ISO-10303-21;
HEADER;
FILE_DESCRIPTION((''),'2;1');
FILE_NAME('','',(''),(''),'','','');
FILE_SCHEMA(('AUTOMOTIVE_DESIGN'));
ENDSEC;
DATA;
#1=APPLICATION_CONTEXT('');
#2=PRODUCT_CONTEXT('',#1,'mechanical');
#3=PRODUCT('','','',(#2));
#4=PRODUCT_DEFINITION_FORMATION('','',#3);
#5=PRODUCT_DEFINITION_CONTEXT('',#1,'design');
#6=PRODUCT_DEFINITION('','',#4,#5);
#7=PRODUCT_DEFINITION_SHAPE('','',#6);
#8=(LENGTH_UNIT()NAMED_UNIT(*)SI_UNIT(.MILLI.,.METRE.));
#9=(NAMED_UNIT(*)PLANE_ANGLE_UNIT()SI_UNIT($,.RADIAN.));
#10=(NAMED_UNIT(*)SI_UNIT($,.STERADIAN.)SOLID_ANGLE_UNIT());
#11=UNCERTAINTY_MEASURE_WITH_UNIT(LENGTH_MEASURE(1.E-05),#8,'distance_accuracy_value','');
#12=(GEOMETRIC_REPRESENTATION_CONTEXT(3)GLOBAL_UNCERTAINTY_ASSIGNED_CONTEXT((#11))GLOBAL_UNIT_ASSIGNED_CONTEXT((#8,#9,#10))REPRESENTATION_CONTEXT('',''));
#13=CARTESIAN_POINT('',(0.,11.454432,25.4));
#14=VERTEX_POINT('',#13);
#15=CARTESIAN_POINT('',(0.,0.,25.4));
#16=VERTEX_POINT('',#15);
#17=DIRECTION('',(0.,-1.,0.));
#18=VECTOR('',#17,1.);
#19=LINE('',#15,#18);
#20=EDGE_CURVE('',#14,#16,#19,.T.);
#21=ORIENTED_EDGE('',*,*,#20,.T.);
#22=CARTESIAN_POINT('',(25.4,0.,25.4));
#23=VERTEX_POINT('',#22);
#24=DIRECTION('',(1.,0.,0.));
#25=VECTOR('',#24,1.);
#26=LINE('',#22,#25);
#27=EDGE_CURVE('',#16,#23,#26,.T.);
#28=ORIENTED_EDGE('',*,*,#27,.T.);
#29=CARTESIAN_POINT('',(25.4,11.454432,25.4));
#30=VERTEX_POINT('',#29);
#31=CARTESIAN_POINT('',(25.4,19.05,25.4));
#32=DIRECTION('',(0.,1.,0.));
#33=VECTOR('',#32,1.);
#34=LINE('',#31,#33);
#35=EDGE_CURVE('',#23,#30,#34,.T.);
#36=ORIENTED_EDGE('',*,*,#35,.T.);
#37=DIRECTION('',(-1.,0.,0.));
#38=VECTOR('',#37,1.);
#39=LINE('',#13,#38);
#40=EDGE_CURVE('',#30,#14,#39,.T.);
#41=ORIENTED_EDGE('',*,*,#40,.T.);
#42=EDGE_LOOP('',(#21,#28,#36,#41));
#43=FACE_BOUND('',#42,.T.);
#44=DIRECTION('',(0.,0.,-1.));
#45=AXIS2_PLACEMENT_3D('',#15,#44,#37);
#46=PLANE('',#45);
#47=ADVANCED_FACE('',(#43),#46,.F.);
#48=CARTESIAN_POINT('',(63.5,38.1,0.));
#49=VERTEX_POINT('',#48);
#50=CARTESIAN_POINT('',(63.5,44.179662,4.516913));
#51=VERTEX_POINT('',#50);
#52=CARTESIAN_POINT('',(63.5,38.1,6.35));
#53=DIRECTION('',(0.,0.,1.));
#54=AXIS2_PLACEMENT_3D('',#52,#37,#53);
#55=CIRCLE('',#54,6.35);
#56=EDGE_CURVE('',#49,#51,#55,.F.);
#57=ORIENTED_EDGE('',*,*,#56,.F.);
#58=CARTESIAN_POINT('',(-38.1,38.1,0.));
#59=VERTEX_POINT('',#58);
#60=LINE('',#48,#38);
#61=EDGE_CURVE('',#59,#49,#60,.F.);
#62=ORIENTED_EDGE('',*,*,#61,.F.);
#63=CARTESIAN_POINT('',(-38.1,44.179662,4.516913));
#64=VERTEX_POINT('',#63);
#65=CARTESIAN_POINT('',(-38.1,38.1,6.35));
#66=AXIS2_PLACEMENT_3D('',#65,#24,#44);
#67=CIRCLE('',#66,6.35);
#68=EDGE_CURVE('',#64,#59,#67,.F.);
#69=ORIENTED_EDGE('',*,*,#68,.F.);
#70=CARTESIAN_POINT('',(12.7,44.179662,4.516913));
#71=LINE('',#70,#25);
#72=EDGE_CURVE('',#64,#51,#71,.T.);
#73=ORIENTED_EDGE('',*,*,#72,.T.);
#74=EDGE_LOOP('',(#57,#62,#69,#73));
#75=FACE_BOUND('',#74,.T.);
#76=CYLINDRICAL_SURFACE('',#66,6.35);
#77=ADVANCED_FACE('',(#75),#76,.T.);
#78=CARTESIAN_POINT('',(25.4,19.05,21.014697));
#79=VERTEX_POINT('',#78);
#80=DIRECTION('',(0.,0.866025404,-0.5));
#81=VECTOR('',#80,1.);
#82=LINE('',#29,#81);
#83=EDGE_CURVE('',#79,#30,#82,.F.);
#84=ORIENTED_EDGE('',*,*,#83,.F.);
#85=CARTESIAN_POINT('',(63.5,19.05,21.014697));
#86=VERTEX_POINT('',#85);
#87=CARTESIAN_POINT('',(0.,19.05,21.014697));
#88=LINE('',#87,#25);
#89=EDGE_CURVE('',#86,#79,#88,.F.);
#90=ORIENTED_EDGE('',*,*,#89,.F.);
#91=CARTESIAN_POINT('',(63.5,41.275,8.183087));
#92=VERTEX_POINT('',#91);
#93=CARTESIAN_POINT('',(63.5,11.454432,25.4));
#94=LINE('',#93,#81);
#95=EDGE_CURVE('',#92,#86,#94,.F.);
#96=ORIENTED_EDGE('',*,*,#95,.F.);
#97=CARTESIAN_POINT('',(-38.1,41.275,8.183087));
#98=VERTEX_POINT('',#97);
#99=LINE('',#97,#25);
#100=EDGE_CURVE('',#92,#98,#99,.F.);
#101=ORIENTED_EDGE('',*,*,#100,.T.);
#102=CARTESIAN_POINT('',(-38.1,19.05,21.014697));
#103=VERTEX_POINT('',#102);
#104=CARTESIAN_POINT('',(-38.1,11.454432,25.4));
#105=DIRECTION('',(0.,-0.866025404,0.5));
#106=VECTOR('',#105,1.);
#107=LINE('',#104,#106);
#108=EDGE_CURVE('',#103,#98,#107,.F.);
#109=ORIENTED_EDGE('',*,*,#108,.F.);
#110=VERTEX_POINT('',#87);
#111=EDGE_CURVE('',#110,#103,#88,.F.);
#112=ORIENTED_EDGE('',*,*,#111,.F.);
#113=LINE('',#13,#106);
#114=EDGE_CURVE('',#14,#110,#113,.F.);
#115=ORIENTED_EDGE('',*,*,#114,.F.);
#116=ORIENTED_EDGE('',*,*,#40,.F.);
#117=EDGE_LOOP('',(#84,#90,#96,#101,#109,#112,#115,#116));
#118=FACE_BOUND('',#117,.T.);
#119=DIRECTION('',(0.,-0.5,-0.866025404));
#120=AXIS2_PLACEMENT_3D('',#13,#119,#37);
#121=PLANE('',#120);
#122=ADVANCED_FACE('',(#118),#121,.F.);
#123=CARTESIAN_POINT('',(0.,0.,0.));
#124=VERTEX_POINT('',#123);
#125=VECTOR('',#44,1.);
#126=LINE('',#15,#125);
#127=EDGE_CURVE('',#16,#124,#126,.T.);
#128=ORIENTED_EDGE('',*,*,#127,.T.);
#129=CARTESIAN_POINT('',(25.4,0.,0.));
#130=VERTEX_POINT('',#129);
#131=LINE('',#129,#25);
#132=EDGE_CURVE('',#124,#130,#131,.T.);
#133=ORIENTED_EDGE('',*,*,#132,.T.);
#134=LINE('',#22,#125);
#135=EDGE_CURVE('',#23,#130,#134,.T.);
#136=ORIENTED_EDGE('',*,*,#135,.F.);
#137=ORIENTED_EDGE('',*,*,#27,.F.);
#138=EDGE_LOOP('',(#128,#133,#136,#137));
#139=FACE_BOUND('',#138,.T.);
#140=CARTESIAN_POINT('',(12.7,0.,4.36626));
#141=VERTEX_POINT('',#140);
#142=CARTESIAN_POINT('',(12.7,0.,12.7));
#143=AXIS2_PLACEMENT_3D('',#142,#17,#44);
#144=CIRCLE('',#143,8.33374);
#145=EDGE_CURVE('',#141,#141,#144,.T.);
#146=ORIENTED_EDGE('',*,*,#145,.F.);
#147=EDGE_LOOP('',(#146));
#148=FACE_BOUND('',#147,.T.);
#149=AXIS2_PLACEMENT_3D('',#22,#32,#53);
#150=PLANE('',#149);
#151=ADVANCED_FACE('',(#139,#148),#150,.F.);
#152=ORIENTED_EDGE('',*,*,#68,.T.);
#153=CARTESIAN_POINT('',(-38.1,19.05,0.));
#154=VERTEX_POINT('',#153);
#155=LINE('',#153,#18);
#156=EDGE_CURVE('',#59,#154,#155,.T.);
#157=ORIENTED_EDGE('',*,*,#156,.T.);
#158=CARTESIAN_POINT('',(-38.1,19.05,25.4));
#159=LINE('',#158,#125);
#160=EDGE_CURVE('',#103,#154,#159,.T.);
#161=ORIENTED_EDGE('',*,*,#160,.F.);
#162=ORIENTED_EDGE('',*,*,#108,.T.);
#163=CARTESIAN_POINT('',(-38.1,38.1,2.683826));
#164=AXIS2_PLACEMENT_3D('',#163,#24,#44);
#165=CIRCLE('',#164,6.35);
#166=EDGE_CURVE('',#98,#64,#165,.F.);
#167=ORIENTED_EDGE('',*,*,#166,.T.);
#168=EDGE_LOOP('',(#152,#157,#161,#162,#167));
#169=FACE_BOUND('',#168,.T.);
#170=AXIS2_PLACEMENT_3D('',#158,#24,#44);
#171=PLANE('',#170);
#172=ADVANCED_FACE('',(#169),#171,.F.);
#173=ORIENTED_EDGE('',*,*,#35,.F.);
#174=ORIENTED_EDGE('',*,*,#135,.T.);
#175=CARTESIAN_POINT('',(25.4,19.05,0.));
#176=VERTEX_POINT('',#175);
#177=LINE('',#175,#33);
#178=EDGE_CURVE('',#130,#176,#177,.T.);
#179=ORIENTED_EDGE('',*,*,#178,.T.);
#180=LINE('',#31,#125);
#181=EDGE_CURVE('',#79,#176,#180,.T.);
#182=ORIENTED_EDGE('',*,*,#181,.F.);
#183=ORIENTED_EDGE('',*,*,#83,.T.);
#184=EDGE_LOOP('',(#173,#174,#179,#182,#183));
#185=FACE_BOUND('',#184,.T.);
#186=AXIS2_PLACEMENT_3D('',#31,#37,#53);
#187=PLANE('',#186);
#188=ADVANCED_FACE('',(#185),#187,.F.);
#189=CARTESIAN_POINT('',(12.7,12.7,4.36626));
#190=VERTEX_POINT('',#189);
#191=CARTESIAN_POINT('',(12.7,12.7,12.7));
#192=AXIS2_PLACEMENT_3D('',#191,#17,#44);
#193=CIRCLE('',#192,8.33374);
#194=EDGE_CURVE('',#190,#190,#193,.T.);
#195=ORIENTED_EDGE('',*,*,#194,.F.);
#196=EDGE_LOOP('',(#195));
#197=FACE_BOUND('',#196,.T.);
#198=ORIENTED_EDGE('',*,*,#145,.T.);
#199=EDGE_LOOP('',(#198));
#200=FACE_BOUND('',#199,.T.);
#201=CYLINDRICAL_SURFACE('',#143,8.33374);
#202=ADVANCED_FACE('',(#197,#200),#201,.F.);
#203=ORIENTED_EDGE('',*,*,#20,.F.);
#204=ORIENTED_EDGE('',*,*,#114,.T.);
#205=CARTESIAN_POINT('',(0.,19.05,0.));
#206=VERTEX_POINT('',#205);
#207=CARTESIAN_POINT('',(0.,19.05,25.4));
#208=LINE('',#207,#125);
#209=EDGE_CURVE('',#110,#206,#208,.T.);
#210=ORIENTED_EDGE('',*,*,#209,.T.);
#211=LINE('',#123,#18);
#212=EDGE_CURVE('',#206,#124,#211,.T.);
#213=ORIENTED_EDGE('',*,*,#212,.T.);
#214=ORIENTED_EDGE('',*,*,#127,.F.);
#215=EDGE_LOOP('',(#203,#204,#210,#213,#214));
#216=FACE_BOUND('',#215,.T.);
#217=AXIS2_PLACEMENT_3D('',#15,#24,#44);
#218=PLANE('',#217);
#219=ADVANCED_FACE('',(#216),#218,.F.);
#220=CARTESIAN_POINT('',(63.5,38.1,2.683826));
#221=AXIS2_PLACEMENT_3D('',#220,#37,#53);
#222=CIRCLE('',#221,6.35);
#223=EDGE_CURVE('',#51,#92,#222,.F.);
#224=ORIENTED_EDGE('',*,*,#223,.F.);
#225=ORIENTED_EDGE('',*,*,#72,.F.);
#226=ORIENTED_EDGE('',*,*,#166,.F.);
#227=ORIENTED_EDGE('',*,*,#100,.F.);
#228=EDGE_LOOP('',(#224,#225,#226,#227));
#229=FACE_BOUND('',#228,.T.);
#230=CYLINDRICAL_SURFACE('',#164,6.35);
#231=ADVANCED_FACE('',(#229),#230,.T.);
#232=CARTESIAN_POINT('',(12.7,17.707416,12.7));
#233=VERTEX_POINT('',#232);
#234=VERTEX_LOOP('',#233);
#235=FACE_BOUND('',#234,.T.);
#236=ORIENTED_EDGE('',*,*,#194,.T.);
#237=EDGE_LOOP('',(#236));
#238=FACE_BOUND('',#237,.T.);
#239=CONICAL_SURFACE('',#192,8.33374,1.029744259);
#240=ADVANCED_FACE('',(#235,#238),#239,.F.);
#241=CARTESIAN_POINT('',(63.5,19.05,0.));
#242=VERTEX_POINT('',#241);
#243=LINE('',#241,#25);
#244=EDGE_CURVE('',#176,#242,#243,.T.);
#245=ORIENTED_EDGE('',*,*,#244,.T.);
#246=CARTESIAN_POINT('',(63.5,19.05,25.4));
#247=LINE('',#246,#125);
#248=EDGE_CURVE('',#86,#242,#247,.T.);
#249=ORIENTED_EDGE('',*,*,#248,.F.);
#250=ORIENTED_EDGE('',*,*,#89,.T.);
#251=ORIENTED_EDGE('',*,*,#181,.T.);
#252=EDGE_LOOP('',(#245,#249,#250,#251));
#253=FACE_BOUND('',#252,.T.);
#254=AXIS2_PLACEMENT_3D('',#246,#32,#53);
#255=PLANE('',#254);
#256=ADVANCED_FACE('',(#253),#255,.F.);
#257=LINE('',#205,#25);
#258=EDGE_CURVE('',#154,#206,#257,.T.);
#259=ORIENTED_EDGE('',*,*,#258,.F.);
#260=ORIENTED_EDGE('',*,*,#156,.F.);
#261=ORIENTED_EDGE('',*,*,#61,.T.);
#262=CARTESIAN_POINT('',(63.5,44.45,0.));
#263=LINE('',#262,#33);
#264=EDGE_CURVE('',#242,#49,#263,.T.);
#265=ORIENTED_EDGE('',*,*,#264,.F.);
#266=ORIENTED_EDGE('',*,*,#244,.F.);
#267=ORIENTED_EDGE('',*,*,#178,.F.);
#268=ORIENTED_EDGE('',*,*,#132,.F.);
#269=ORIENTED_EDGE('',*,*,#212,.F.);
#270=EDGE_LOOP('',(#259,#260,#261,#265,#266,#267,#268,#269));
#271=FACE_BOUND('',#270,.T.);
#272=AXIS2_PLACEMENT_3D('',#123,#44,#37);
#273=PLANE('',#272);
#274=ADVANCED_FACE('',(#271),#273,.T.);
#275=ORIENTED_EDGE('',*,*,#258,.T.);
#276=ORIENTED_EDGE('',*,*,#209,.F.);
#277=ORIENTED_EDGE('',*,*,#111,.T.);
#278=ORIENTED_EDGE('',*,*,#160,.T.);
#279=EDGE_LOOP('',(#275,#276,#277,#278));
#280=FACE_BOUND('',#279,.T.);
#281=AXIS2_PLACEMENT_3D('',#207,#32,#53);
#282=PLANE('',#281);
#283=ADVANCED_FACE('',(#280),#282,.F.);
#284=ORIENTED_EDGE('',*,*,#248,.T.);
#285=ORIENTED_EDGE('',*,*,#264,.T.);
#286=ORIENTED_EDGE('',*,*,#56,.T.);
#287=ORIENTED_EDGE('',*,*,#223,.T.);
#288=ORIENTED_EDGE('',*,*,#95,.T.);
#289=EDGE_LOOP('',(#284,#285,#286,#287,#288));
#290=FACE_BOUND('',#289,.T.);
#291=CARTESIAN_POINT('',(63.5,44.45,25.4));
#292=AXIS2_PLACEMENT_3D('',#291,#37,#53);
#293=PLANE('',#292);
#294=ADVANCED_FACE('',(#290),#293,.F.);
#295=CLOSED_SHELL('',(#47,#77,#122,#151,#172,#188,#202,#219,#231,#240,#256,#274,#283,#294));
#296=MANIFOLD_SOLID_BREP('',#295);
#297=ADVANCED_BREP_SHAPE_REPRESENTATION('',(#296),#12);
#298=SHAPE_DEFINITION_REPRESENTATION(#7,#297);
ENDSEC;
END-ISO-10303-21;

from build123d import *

# Parameters (mm, degrees)
BOSS_EXTRUDE1_DEPTH = 25.4
CHAMFER1_SIZE       = 19.05
CHAMFER1_SIZE2      = 32.995567884
FILLET1_R           = 6.35


# Read off the part's stored shape, not the designer's step: AdvancedHole1
with BuildPart() as part:
    # Sketch1 → Boss-Extrude1 (new body)
    with BuildSketch(Plane.XY):
        Polygon((0, 0), (0, 19.05), (-38.1, 19.05), (-38.1, 44.45), (63.5, 44.45), (63.5, 19.05), (25.4, 19.05), (25.4, 0), align=None)
    extrude(amount=BOSS_EXTRUDE1_DEPTH)

    # Chamfer1
    chamfer1_edges = [part.edges().sort_by_distance(p)[0] for p in [
        (12.7, 44.45, 25.4),
    ]]
    chamfer1_side = [part.faces().sort_by_distance(p)[0] for p in [
        (12.7, 44.45, 12.7),
    ]]
    chamfer(chamfer1_edges, length=CHAMFER1_SIZE, length2=CHAMFER1_SIZE2, reference=chamfer1_side[0])

    # Fillet1
    # the kernel refuses this fillet: 6.35 mm, written as the material it takes off along each edge
    with BuildSketch(Plane(origin=(-53.975, 44.45, 0), x_dir=(0, -1, 0), z_dir=(1, 0, 0))) as fillet1_piece_1:
        with BuildLine():
            CenterArc((FILLET1_R, -FILLET1_R), FILLET1_R, 90, 90)
            Line((0, -FILLET1_R), (0, 0))
            Line((0, 0), (FILLET1_R, 0))
        make_face()
    extrude(amount=133.35, mode=Mode.SUBTRACT)
    with BuildSketch(Plane(origin=(-47.265435523, 44.45, 6.35), x_dir=(0, -0.8660254037844407, 0.49999999999999656), z_dir=(1, 0, 0))) as fillet1_piece_2:
        with BuildLine():
            CenterArc((FILLET1_R * 0.57735026919, FILLET1_R), FILLET1_R, 210, 60)
            Line((-FILLET1_R * 0.288675134595, FILLET1_R * 0.5), (0, 0))
            Line((0, 0), (FILLET1_R * 0.57735026919, 0))
        make_face()
    extrude(amount=119.930871047, mode=Mode.SUBTRACT)

    # AdvancedHole1 outline → AdvancedHole1 (revolve, cut)
    with BuildSketch(Plane(origin=(12.7, 0, 12.7), x_dir=(1, 0, 0), z_dir=(0, 0, 1))):
        Polygon((8.33374, 0), (8.33374, 12.7), (0, 17.707416175), (0, 0), align=None)
    revolve(axis=Axis((12.7, 0, 12.7), (0, 1, 0)), mode=Mode.SUBTRACT)


solid = part.part
